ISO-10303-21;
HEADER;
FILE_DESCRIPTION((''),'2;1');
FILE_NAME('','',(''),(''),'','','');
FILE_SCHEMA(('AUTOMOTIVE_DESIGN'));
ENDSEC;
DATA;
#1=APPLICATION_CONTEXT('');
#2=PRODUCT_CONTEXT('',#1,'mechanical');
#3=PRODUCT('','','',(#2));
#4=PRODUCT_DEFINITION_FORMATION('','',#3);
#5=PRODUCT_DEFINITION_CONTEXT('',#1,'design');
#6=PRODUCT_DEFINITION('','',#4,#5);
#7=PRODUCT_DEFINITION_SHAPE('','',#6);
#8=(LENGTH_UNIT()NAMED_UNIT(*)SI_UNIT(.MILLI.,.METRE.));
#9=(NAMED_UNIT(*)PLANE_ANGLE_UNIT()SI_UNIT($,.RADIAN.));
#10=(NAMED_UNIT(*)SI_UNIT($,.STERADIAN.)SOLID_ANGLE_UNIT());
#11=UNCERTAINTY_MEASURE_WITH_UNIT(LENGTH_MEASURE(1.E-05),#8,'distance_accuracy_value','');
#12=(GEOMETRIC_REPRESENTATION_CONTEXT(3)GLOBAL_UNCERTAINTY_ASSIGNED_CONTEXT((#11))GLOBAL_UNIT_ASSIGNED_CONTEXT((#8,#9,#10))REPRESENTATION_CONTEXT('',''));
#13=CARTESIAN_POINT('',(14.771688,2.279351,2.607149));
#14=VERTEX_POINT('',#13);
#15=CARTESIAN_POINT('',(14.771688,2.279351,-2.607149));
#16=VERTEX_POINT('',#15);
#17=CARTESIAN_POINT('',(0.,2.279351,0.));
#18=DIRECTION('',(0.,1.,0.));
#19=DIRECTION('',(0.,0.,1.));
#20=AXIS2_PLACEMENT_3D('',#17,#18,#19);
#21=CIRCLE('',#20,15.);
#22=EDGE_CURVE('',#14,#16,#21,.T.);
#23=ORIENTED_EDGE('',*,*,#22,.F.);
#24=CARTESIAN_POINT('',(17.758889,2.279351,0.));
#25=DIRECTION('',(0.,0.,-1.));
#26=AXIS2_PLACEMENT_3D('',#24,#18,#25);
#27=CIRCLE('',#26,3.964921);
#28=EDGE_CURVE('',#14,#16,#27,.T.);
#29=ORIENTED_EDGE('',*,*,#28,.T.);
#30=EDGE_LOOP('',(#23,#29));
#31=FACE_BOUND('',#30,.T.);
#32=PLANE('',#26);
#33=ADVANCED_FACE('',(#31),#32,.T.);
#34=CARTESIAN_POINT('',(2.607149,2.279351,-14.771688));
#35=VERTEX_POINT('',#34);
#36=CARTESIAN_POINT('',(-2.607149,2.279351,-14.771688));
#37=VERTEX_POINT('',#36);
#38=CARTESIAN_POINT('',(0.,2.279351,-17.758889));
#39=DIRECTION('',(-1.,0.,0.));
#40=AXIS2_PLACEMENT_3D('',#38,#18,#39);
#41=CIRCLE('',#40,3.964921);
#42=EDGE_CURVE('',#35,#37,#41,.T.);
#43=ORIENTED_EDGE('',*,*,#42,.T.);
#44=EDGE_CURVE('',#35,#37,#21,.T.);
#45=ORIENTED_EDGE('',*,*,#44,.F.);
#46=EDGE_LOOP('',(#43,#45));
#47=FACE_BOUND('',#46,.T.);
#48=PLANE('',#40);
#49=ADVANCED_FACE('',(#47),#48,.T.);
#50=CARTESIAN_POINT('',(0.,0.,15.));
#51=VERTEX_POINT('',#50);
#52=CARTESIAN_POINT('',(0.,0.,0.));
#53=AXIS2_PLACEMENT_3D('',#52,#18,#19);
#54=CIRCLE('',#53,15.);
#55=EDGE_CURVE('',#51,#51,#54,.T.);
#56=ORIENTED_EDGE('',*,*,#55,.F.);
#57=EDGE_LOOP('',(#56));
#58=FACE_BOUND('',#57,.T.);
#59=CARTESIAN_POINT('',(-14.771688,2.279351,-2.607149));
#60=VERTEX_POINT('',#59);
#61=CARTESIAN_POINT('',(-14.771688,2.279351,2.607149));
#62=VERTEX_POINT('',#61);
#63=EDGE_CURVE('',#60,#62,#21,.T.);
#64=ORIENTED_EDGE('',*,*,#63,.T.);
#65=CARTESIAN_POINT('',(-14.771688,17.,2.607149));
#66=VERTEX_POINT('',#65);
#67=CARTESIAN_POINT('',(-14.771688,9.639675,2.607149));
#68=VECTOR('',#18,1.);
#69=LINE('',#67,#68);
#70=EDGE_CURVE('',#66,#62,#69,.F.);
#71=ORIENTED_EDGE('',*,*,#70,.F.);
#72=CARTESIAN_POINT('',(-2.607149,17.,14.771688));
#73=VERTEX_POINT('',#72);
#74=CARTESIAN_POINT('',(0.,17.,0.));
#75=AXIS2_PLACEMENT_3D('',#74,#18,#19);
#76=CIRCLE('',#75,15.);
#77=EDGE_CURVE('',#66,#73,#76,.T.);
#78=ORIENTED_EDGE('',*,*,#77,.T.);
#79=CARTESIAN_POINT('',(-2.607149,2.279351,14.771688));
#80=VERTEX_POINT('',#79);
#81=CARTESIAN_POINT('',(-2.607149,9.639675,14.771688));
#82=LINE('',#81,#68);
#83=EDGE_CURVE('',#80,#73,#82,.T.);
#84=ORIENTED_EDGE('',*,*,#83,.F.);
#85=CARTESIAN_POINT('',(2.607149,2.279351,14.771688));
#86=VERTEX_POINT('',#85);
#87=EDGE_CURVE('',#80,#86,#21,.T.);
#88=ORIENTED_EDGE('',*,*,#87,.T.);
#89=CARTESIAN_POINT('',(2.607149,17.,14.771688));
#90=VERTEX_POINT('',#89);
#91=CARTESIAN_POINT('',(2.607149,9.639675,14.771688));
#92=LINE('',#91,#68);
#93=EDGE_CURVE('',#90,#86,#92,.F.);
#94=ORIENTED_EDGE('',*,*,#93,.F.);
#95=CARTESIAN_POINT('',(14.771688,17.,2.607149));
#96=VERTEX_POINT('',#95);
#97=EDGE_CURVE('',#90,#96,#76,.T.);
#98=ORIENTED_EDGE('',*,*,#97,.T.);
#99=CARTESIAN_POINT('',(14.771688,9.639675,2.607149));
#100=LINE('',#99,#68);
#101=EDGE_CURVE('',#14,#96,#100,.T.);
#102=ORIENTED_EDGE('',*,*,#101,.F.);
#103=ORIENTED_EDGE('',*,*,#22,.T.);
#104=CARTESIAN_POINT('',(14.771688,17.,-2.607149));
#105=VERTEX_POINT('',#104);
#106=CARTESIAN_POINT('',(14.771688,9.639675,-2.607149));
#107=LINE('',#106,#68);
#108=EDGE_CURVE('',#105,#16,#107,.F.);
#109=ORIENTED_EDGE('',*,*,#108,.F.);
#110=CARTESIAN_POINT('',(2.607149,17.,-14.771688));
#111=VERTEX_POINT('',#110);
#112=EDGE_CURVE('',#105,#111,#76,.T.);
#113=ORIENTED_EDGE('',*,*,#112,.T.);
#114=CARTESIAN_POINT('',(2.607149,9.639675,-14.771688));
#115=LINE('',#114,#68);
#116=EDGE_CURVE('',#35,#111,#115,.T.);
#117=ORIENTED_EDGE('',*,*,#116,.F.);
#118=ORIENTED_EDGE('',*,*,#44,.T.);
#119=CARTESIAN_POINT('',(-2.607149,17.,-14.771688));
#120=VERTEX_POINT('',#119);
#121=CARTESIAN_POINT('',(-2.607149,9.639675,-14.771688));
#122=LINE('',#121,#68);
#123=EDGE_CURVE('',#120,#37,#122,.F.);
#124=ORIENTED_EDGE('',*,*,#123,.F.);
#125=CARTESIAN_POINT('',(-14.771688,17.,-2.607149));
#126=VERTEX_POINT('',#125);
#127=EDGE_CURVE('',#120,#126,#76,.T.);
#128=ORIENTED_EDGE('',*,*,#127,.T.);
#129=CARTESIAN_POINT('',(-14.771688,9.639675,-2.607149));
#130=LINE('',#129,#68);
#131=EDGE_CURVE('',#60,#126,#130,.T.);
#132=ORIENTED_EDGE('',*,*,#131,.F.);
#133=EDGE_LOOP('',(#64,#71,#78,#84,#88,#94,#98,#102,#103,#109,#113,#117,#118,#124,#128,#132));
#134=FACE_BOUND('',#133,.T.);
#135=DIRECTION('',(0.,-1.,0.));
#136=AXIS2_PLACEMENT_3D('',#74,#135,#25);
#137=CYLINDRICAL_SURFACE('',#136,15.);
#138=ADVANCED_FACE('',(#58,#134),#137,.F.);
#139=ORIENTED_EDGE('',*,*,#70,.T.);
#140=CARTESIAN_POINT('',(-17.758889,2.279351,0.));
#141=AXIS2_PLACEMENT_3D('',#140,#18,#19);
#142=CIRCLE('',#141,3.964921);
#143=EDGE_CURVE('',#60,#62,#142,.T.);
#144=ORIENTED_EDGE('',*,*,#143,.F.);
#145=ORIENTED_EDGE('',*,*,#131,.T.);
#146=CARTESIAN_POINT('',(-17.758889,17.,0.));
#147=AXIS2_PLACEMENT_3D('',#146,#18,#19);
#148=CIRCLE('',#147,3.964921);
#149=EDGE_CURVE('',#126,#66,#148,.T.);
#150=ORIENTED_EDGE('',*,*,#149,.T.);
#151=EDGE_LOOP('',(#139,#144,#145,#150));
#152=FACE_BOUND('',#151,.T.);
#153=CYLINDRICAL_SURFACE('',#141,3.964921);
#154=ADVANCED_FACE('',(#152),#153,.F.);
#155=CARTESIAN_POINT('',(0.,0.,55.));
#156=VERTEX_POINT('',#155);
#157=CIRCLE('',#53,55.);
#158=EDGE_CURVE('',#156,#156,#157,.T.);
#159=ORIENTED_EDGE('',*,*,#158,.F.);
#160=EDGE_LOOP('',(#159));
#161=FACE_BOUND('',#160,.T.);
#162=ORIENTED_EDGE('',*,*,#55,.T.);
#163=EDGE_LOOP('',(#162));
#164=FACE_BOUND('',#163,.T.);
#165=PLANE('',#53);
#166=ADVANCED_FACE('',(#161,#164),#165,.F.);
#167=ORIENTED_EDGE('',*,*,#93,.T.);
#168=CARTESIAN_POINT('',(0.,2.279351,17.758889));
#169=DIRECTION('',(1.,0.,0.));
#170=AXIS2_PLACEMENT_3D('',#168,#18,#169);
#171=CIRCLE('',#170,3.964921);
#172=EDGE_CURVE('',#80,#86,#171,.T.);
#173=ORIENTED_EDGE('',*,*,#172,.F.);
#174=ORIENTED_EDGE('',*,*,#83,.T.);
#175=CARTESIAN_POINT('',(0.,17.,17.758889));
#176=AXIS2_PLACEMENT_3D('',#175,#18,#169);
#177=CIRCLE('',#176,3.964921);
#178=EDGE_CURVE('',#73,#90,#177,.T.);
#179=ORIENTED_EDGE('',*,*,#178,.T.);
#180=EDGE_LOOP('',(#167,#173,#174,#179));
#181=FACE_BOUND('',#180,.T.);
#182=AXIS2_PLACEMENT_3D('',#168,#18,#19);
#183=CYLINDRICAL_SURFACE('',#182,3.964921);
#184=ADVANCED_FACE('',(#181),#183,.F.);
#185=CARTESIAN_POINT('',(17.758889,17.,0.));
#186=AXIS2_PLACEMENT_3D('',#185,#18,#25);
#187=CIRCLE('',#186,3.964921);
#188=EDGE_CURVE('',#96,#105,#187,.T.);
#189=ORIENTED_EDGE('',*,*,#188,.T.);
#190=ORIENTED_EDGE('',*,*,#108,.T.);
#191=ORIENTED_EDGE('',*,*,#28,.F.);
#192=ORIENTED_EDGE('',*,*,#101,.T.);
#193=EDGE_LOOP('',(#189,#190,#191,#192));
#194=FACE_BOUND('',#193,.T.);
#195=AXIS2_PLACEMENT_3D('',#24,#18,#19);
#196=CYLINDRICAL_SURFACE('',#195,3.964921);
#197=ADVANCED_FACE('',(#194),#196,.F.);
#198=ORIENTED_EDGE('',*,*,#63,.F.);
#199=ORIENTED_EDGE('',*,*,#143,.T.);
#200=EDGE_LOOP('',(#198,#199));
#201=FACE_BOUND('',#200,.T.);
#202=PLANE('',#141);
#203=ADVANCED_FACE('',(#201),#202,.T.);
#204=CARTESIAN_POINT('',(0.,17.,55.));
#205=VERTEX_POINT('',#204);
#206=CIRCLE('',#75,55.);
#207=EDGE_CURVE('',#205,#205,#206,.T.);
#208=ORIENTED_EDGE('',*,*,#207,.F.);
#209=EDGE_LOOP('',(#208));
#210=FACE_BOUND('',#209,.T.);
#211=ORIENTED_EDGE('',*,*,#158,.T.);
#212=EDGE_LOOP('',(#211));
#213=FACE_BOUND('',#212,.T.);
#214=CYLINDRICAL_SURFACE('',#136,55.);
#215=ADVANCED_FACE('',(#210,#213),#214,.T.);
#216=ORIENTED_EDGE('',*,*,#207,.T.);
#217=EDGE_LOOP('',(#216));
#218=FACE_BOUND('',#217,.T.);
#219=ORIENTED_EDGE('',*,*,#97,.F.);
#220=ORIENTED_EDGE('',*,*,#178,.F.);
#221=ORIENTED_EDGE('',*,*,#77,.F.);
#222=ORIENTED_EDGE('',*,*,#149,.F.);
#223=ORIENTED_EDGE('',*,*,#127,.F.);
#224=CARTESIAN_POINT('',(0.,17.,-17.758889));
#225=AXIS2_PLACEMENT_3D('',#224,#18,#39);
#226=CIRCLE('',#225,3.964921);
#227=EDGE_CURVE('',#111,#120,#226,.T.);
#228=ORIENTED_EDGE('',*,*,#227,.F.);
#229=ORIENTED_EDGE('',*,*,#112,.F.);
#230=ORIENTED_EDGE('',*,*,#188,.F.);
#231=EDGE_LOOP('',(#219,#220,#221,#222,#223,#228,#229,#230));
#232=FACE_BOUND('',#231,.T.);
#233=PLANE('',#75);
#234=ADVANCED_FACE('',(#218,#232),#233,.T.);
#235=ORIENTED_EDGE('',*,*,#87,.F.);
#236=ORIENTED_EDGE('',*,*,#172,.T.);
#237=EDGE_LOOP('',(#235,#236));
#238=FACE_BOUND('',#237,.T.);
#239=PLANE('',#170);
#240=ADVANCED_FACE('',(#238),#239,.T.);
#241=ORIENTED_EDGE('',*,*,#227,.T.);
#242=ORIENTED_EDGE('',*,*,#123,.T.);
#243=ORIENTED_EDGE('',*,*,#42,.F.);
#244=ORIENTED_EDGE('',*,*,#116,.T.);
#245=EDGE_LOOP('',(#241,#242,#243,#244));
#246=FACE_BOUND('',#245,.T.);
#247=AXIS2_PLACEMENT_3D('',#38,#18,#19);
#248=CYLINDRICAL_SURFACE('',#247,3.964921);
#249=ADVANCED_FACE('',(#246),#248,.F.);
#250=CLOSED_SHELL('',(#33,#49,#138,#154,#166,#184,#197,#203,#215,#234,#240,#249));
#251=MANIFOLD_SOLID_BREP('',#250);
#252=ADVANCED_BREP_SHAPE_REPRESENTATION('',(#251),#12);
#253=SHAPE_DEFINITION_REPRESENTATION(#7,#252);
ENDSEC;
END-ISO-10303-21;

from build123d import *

# Parameters (mm, degrees)
SKETCH1_R           = 55
BOSS_EXTRUDE1_DEPTH = 17
SKETCH2_R           = 15
CUT_EXTRUDE1_DEPTH  = 80.617837197
SKETCH3_R           = 3.964920539
CUT_EXTRUDE2_DEPTH  = 14.720649074
CIRPATTERN1_COUNT   = 4


with BuildPart() as part:
    # Sketch1 → Boss-Extrude1 (new body)
    with BuildSketch(Plane(origin=(0, 0, 0), x_dir=(1, 0, 0), z_dir=(0, 1, 0))):
        Circle(SKETCH1_R)
    extrude(amount=BOSS_EXTRUDE1_DEPTH)

    # Sketch2 → Cut-Extrude1 (cut, through all)
    with BuildSketch(Plane(origin=(0, 0, 0), x_dir=(1, 0, 0), z_dir=(0, 1, 0))):
        Circle(SKETCH2_R)
    extrude(amount=CUT_EXTRUDE1_DEPTH, mode=Mode.SUBTRACT)

    # Sketch3 → Cut-Extrude2 (cut)
    with BuildSketch(Plane(origin=(0, 17, 0), x_dir=(1, 0, 0), z_dir=(0, 1, 0))):
        with Locations((-17.758888816, 0)):
            Circle(SKETCH3_R)
    cut_extrude2 = extrude(amount=-CUT_EXTRUDE2_DEPTH, mode=Mode.SUBTRACT)

    # CirPattern1: Cut-Extrude2 ×4 about axis
    cirpattern1_axis = Axis((0, 0, 0), (0, 1, 0))
    for i in range(1, CIRPATTERN1_COUNT):
        add(cut_extrude2.rotate(cirpattern1_axis, i * 360 / CIRPATTERN1_COUNT), mode=Mode.SUBTRACT)


solid = part.part
